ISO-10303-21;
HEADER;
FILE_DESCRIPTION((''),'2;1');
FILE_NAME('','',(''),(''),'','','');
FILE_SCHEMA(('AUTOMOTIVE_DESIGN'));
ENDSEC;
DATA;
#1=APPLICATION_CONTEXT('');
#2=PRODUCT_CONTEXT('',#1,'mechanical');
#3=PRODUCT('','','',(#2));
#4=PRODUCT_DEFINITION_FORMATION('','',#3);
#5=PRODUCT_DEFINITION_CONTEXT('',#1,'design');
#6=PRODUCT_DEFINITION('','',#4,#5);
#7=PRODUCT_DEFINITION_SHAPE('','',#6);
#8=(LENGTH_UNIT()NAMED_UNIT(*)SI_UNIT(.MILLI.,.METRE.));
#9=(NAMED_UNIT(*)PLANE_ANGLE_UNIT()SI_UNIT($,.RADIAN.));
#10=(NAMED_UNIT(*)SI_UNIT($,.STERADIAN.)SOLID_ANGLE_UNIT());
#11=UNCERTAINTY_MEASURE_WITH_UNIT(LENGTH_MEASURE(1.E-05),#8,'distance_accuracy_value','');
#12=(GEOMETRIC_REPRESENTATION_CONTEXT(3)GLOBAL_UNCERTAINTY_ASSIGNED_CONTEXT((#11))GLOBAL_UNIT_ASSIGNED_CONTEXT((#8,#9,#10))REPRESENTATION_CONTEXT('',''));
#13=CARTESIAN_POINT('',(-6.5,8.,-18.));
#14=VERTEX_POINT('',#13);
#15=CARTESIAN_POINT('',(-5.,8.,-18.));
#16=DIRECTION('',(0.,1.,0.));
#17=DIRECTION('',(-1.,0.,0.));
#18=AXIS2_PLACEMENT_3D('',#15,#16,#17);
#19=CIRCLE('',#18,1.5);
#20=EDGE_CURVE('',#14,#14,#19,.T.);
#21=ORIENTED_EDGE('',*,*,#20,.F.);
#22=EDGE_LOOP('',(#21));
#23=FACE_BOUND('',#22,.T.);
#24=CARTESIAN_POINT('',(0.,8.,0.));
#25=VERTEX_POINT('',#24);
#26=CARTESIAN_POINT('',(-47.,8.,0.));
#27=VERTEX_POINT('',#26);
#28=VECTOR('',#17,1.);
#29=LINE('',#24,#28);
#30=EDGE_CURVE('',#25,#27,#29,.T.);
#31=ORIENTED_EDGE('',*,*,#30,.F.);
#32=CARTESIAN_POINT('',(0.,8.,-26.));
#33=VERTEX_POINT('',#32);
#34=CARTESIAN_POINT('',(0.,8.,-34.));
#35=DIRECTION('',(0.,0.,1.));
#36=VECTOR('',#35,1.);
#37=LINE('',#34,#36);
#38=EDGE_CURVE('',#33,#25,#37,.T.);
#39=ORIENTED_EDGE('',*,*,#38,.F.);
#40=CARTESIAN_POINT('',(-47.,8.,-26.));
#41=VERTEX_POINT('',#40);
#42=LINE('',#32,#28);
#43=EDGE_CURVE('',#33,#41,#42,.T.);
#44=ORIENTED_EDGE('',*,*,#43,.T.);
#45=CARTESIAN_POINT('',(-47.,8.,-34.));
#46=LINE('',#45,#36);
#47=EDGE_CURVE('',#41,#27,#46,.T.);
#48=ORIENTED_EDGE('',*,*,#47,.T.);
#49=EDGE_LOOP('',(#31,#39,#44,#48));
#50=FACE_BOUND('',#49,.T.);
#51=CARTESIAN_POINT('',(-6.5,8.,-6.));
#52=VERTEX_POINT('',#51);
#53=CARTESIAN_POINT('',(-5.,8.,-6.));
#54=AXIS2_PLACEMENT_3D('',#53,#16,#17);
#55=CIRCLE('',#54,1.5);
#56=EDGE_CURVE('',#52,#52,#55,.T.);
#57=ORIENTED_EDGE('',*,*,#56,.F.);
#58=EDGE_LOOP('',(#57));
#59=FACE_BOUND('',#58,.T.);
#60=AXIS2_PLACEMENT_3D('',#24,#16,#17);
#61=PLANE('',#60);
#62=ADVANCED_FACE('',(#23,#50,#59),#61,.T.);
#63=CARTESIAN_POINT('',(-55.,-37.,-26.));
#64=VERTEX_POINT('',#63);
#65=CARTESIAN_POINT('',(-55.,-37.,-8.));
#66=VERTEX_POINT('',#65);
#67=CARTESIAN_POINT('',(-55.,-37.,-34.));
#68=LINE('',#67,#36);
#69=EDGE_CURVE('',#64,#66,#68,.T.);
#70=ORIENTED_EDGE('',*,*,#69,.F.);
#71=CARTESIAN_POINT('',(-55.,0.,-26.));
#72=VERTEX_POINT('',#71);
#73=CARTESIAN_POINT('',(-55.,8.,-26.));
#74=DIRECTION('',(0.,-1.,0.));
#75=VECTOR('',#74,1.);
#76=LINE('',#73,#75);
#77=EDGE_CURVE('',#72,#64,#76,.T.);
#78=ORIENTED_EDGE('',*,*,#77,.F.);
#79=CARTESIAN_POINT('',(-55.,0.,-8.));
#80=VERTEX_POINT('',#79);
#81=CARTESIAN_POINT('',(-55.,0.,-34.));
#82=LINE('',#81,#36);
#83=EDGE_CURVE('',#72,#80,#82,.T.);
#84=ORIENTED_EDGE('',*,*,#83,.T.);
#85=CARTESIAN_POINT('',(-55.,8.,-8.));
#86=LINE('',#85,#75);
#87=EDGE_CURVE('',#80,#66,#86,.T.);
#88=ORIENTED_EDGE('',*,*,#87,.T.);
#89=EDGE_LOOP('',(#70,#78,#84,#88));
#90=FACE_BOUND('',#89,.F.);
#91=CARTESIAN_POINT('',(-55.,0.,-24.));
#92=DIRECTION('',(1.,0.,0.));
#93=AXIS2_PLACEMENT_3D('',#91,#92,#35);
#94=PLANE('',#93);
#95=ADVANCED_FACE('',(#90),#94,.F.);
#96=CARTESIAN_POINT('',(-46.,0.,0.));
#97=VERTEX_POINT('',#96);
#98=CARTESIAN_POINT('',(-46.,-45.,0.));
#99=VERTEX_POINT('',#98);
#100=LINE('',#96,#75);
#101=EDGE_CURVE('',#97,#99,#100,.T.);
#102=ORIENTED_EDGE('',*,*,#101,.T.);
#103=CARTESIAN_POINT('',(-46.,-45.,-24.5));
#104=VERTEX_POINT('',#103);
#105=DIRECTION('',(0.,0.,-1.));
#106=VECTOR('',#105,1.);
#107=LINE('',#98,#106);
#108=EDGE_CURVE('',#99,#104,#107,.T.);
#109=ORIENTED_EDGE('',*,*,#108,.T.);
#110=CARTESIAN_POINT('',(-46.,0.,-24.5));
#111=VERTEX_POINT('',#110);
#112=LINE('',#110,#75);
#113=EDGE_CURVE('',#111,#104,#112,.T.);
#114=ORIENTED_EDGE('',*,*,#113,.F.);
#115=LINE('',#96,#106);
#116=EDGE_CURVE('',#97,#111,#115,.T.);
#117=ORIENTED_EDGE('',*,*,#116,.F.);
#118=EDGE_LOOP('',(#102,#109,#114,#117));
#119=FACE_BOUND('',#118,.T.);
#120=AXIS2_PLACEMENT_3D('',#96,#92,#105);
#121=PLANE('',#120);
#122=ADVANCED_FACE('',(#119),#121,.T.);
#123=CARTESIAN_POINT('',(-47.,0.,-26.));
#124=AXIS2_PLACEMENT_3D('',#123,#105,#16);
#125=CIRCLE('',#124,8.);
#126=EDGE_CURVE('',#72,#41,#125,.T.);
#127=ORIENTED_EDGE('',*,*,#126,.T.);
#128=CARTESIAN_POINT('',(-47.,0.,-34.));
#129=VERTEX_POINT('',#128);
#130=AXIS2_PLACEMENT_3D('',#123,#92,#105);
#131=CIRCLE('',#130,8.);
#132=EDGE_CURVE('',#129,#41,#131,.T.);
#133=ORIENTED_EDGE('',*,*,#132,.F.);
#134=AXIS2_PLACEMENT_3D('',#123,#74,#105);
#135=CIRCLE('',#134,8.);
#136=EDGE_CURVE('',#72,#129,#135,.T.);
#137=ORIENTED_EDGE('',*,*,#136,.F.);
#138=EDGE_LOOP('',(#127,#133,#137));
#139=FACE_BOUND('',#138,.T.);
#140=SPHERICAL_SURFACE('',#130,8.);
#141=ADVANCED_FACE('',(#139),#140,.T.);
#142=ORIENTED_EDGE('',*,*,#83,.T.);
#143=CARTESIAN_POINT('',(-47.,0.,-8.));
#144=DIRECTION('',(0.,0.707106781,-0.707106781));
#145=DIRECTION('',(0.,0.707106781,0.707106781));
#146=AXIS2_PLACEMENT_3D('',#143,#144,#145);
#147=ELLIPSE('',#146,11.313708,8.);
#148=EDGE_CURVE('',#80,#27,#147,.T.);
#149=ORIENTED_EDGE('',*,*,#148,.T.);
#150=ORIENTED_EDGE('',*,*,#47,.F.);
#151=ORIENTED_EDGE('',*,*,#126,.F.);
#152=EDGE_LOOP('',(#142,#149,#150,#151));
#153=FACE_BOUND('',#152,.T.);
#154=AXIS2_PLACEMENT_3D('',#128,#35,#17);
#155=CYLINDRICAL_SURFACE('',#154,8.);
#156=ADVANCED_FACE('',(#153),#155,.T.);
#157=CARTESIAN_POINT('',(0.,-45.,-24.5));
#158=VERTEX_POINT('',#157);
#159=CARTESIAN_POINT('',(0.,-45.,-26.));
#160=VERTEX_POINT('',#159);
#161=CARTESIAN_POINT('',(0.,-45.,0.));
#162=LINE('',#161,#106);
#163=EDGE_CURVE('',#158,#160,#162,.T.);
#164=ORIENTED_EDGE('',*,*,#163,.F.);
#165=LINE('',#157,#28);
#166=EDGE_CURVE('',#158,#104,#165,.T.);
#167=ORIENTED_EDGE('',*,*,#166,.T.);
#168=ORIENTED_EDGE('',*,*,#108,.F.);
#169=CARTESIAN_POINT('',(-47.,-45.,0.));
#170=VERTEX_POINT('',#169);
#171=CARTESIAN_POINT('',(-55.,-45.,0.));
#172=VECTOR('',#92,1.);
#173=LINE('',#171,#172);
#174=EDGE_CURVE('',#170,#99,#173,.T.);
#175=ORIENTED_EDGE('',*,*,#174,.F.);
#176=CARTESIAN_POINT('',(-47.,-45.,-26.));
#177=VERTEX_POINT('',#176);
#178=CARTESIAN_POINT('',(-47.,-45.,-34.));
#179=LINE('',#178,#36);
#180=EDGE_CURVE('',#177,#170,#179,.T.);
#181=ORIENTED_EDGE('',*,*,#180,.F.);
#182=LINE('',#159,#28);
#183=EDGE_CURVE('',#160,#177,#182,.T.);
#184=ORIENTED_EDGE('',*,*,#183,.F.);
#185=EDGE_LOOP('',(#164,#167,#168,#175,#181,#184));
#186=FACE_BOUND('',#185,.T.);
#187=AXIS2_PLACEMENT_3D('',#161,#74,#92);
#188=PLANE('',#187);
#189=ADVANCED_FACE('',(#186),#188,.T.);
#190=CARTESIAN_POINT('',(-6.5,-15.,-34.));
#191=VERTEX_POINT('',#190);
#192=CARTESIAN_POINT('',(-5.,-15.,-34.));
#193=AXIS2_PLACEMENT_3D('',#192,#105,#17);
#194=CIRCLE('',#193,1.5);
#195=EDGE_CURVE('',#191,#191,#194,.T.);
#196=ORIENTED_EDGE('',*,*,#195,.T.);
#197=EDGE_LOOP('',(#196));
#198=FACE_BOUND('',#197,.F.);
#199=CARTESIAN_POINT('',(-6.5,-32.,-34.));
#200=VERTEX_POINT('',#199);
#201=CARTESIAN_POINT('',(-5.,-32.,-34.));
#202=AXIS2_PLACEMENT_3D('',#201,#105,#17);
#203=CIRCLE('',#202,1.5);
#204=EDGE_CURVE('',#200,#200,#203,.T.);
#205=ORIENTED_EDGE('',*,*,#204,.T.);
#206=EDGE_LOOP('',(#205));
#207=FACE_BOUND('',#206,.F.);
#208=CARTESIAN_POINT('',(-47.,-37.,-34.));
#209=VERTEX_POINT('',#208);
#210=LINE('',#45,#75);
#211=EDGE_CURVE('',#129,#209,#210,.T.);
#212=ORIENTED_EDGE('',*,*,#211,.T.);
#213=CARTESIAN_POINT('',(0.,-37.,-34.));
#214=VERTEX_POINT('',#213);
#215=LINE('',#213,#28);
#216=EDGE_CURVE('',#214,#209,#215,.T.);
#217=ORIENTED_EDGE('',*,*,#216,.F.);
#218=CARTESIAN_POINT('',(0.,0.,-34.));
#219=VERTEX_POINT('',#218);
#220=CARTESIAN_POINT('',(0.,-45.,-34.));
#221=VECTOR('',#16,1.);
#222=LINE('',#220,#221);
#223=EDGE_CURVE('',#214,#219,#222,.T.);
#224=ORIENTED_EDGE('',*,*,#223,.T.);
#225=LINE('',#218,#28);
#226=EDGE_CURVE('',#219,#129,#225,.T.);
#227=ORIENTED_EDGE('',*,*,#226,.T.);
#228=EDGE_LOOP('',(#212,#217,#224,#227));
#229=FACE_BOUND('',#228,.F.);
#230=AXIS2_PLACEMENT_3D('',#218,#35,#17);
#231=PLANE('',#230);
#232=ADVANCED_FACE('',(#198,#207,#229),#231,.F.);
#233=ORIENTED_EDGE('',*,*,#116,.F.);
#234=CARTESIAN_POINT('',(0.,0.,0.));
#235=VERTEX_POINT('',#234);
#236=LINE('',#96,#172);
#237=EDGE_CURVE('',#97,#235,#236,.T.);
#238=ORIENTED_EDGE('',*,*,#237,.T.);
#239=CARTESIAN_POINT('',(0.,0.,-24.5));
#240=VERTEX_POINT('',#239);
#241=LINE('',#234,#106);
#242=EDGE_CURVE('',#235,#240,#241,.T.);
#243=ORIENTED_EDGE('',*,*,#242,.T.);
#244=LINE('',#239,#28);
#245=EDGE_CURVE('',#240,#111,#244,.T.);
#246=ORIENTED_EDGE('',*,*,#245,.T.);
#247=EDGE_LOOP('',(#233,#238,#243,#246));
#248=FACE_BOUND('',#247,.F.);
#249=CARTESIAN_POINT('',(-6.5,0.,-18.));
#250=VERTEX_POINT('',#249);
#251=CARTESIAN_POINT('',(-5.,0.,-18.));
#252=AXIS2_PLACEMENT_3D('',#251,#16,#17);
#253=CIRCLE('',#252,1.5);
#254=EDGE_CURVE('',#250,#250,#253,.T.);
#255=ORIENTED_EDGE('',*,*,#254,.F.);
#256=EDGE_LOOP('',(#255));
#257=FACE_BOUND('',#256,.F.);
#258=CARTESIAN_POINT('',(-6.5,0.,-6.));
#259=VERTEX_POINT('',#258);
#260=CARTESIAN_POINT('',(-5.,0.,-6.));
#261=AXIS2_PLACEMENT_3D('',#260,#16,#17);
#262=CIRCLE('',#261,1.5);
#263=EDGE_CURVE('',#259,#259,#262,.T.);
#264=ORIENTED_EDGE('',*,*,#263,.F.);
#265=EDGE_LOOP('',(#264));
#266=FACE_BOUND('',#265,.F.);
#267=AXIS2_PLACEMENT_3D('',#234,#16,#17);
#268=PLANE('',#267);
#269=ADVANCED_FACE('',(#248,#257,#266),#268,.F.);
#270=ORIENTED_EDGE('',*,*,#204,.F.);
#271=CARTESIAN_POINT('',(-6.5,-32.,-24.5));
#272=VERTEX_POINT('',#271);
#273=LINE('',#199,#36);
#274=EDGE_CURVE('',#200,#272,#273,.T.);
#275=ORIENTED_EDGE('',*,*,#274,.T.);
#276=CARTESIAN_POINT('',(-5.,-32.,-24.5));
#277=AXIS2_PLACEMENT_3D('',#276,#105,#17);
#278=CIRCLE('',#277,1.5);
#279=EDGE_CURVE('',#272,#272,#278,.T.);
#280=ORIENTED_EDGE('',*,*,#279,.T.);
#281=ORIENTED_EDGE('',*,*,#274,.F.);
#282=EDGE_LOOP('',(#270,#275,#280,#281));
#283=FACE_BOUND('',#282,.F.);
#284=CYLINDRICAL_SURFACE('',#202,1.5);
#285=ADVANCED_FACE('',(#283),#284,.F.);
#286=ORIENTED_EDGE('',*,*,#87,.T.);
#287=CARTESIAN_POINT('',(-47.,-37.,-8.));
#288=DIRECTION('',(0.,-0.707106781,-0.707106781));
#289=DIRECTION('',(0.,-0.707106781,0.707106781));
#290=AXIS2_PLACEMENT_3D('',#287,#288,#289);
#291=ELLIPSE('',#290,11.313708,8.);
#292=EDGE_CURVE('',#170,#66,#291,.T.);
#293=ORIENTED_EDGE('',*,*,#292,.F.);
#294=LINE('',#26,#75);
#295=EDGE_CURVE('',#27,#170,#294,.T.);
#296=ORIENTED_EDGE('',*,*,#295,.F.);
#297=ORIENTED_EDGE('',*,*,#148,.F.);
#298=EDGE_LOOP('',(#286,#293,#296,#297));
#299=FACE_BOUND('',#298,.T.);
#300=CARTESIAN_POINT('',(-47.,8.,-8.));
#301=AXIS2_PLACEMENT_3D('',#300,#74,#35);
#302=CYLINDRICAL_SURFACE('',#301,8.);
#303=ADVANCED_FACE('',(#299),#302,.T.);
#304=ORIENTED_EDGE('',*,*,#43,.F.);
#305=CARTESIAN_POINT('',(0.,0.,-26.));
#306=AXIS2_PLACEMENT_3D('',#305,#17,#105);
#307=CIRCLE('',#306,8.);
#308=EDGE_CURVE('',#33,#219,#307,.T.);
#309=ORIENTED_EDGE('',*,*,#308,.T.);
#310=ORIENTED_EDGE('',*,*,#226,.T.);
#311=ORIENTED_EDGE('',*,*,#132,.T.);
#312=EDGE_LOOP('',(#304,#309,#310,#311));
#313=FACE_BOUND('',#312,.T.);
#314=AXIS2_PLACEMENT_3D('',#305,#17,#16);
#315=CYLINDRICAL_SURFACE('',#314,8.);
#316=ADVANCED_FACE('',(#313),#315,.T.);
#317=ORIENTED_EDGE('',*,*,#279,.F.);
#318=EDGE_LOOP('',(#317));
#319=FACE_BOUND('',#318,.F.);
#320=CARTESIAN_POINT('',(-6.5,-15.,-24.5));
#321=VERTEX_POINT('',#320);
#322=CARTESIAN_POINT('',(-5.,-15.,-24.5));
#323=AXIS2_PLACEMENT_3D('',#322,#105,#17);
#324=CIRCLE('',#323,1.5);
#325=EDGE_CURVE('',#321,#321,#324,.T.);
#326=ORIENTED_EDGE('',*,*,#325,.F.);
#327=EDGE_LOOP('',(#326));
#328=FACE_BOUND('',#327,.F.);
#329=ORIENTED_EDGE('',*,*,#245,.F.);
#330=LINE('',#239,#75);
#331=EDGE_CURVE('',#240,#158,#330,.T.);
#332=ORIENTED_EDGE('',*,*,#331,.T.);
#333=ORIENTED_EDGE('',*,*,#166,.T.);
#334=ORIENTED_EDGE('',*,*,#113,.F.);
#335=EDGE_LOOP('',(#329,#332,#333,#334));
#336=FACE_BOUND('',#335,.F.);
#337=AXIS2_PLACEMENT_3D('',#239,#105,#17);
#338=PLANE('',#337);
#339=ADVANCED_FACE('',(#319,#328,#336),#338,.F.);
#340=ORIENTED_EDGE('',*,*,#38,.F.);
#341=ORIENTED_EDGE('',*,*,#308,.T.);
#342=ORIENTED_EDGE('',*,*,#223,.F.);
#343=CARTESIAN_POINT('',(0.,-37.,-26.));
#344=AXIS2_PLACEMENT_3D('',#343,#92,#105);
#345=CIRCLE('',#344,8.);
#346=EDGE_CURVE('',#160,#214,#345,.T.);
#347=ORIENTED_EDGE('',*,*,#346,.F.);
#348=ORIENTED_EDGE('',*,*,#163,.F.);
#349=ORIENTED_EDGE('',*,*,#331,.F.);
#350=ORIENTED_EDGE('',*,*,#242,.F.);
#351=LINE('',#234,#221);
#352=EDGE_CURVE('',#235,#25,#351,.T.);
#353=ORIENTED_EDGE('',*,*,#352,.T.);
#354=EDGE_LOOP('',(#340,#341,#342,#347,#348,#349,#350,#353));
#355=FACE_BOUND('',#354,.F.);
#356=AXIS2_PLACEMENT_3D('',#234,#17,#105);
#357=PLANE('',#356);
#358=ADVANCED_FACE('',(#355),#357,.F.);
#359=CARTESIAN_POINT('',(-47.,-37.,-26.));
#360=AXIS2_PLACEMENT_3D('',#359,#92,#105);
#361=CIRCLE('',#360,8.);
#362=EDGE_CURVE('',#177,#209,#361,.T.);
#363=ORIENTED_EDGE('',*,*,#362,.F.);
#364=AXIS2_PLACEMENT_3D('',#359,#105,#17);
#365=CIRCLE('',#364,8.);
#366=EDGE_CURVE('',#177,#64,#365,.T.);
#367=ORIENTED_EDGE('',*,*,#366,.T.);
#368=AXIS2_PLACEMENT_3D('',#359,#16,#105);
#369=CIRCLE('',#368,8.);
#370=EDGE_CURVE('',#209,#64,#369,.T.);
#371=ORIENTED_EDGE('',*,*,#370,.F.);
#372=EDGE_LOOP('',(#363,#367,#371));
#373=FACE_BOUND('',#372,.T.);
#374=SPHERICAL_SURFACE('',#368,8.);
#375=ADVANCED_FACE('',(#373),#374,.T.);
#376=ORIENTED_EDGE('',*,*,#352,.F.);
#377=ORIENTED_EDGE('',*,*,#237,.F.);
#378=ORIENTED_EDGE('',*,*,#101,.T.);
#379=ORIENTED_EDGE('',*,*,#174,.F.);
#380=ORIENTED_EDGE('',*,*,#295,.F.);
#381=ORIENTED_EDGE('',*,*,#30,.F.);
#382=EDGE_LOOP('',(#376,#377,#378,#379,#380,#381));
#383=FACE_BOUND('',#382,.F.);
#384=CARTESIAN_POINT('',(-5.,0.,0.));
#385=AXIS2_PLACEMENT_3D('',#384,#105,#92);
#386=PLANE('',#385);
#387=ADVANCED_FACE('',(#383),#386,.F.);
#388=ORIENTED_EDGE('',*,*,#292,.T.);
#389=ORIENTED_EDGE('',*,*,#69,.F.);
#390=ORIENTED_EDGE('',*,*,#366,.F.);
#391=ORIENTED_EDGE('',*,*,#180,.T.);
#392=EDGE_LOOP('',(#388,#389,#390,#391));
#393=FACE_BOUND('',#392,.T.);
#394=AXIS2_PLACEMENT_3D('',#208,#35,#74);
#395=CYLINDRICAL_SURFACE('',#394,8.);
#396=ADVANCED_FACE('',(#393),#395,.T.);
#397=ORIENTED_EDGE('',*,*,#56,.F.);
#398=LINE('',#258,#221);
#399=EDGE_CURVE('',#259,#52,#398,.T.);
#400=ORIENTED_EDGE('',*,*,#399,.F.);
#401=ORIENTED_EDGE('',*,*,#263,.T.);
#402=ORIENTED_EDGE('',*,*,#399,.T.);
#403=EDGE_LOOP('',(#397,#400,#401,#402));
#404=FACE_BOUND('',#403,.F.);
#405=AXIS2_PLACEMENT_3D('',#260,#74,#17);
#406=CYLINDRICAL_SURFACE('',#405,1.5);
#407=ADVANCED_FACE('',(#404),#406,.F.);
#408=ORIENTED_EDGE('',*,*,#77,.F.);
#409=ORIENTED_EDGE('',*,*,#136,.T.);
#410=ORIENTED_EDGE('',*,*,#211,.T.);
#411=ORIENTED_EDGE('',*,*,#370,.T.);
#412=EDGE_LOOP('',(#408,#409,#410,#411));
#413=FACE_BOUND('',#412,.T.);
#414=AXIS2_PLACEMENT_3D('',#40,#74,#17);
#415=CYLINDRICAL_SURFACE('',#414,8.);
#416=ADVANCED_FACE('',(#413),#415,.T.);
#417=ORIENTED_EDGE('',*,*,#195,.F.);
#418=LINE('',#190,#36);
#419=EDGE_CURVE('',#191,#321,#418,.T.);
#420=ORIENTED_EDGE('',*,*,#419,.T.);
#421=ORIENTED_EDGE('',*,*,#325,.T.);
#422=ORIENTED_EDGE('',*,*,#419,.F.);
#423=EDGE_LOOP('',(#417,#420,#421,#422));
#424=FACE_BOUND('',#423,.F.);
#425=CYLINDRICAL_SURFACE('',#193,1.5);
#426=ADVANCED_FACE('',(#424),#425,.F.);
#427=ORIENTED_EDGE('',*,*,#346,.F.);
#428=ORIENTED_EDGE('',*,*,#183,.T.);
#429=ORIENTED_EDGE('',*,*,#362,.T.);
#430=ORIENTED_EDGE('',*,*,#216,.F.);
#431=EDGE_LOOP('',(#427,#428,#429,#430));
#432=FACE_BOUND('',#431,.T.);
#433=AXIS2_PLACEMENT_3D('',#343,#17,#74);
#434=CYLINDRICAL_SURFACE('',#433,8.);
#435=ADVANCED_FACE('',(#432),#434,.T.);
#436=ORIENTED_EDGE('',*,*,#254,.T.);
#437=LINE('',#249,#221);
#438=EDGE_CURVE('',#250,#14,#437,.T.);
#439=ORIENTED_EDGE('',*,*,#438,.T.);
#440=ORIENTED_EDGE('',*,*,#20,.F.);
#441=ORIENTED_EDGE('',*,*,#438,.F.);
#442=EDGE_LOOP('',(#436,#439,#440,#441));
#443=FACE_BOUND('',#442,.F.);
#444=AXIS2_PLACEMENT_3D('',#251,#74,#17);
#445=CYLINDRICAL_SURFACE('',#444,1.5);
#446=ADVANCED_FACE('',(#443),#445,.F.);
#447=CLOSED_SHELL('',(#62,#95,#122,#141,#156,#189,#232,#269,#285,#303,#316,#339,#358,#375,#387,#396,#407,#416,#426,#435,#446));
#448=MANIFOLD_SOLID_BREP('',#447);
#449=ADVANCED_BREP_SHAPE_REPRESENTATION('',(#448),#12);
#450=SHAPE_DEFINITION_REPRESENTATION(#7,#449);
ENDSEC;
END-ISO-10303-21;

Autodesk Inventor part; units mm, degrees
ref_plane "YZ Plane" through (0, 0, 0) normal (1, 0, 0) x (0, 1, 0)
ref_plane "XZ Plane" through (0, 0, 0) normal (0, 1, 0) x (-1, 0, 0)
ref_plane "XY Plane" through (0, 0, 0) normal (0, 0, 1) x (1, 0, 0)
sketch "Boceto1" plane through (0, 0, 0) normal (0, 1, 0) x (-1, 0, 0)
  line L0 (0, 0) -> (0, -24)
  line L1 (10, 0) -> (0, 0)
  line L2 (55, -24) -> (55, 0)
  line L3 (55, 0) -> (10, 0)
  line L4 (0, -24) -> (0, -34)
  line L5 (0, -34) -> (55, -34)
  line L6 (55, -34) -> (55, -24)
  line L7 (0, 0) -> (5, 0)
  circle A0 centre (5, -6) radius 1.5
  circle A1 centre (5, -18) radius 1.5
  dimension "d0" = 24
  dimension "d4" = 10
  dimension "d7" = 5
extrude "Extrusión1" add sketch "Boceto1" along normal blind 8
sketch "Boceto2" plane through (0, 0, 0) normal (0, -1, 0) x (1, 0, 0)
  line L0 (0, 0) -> (0, -24.5)
  line L1 (0, 0) -> (0, -34) projected
  line L2 (0, -24.5) -> (-46, -24.5)
  line L3 (-55, -34) -> (-55, 0) projected
  line L4 (-55, -24.5) -> (-55, -34)
  line L5 (0, -34) -> (-55, -34) projected
  line L6 (0, -34) -> (-55, -34)
  line L7 (0, -34) -> (0, -24.5)
  line L8 (-55, 0) -> (0, 0) projected
  line L9 (-55, 0) -> (-46, 0)
  line L10 (-46, 0) -> (-46, -24.5)
  line L11 (-55, -24.5) -> (-55, 0)
  dimension "d15" = 24.5
  dimension "d16" = 9
extrude "Extrusión2" add sketch "Boceto2" along normal blind 45 contours L1 L5 L3 L8 L10 L2
sketch "Boceto3" plane through (0, 8, -34) normal (0, 0, -1) x (-1, 0, 0)
  circle A0 centre (5, -23) radius 1.5
  circle A1 centre (5, -40) radius 1.5
  point P0 (0, -8)
extrude "Extrusión3" cut sketch "Boceto3" against normal blind 45
fillet "Empalme1" radius 8 6 edges at (-27.5, 8, -34) (-55, -18.5, -34) (-55, 8, -17) (-27.5, -45, -34) (-55, -18.5, 0) (-55, -45, -17)
properties part number "Soporte_Brazo_IZQ"
